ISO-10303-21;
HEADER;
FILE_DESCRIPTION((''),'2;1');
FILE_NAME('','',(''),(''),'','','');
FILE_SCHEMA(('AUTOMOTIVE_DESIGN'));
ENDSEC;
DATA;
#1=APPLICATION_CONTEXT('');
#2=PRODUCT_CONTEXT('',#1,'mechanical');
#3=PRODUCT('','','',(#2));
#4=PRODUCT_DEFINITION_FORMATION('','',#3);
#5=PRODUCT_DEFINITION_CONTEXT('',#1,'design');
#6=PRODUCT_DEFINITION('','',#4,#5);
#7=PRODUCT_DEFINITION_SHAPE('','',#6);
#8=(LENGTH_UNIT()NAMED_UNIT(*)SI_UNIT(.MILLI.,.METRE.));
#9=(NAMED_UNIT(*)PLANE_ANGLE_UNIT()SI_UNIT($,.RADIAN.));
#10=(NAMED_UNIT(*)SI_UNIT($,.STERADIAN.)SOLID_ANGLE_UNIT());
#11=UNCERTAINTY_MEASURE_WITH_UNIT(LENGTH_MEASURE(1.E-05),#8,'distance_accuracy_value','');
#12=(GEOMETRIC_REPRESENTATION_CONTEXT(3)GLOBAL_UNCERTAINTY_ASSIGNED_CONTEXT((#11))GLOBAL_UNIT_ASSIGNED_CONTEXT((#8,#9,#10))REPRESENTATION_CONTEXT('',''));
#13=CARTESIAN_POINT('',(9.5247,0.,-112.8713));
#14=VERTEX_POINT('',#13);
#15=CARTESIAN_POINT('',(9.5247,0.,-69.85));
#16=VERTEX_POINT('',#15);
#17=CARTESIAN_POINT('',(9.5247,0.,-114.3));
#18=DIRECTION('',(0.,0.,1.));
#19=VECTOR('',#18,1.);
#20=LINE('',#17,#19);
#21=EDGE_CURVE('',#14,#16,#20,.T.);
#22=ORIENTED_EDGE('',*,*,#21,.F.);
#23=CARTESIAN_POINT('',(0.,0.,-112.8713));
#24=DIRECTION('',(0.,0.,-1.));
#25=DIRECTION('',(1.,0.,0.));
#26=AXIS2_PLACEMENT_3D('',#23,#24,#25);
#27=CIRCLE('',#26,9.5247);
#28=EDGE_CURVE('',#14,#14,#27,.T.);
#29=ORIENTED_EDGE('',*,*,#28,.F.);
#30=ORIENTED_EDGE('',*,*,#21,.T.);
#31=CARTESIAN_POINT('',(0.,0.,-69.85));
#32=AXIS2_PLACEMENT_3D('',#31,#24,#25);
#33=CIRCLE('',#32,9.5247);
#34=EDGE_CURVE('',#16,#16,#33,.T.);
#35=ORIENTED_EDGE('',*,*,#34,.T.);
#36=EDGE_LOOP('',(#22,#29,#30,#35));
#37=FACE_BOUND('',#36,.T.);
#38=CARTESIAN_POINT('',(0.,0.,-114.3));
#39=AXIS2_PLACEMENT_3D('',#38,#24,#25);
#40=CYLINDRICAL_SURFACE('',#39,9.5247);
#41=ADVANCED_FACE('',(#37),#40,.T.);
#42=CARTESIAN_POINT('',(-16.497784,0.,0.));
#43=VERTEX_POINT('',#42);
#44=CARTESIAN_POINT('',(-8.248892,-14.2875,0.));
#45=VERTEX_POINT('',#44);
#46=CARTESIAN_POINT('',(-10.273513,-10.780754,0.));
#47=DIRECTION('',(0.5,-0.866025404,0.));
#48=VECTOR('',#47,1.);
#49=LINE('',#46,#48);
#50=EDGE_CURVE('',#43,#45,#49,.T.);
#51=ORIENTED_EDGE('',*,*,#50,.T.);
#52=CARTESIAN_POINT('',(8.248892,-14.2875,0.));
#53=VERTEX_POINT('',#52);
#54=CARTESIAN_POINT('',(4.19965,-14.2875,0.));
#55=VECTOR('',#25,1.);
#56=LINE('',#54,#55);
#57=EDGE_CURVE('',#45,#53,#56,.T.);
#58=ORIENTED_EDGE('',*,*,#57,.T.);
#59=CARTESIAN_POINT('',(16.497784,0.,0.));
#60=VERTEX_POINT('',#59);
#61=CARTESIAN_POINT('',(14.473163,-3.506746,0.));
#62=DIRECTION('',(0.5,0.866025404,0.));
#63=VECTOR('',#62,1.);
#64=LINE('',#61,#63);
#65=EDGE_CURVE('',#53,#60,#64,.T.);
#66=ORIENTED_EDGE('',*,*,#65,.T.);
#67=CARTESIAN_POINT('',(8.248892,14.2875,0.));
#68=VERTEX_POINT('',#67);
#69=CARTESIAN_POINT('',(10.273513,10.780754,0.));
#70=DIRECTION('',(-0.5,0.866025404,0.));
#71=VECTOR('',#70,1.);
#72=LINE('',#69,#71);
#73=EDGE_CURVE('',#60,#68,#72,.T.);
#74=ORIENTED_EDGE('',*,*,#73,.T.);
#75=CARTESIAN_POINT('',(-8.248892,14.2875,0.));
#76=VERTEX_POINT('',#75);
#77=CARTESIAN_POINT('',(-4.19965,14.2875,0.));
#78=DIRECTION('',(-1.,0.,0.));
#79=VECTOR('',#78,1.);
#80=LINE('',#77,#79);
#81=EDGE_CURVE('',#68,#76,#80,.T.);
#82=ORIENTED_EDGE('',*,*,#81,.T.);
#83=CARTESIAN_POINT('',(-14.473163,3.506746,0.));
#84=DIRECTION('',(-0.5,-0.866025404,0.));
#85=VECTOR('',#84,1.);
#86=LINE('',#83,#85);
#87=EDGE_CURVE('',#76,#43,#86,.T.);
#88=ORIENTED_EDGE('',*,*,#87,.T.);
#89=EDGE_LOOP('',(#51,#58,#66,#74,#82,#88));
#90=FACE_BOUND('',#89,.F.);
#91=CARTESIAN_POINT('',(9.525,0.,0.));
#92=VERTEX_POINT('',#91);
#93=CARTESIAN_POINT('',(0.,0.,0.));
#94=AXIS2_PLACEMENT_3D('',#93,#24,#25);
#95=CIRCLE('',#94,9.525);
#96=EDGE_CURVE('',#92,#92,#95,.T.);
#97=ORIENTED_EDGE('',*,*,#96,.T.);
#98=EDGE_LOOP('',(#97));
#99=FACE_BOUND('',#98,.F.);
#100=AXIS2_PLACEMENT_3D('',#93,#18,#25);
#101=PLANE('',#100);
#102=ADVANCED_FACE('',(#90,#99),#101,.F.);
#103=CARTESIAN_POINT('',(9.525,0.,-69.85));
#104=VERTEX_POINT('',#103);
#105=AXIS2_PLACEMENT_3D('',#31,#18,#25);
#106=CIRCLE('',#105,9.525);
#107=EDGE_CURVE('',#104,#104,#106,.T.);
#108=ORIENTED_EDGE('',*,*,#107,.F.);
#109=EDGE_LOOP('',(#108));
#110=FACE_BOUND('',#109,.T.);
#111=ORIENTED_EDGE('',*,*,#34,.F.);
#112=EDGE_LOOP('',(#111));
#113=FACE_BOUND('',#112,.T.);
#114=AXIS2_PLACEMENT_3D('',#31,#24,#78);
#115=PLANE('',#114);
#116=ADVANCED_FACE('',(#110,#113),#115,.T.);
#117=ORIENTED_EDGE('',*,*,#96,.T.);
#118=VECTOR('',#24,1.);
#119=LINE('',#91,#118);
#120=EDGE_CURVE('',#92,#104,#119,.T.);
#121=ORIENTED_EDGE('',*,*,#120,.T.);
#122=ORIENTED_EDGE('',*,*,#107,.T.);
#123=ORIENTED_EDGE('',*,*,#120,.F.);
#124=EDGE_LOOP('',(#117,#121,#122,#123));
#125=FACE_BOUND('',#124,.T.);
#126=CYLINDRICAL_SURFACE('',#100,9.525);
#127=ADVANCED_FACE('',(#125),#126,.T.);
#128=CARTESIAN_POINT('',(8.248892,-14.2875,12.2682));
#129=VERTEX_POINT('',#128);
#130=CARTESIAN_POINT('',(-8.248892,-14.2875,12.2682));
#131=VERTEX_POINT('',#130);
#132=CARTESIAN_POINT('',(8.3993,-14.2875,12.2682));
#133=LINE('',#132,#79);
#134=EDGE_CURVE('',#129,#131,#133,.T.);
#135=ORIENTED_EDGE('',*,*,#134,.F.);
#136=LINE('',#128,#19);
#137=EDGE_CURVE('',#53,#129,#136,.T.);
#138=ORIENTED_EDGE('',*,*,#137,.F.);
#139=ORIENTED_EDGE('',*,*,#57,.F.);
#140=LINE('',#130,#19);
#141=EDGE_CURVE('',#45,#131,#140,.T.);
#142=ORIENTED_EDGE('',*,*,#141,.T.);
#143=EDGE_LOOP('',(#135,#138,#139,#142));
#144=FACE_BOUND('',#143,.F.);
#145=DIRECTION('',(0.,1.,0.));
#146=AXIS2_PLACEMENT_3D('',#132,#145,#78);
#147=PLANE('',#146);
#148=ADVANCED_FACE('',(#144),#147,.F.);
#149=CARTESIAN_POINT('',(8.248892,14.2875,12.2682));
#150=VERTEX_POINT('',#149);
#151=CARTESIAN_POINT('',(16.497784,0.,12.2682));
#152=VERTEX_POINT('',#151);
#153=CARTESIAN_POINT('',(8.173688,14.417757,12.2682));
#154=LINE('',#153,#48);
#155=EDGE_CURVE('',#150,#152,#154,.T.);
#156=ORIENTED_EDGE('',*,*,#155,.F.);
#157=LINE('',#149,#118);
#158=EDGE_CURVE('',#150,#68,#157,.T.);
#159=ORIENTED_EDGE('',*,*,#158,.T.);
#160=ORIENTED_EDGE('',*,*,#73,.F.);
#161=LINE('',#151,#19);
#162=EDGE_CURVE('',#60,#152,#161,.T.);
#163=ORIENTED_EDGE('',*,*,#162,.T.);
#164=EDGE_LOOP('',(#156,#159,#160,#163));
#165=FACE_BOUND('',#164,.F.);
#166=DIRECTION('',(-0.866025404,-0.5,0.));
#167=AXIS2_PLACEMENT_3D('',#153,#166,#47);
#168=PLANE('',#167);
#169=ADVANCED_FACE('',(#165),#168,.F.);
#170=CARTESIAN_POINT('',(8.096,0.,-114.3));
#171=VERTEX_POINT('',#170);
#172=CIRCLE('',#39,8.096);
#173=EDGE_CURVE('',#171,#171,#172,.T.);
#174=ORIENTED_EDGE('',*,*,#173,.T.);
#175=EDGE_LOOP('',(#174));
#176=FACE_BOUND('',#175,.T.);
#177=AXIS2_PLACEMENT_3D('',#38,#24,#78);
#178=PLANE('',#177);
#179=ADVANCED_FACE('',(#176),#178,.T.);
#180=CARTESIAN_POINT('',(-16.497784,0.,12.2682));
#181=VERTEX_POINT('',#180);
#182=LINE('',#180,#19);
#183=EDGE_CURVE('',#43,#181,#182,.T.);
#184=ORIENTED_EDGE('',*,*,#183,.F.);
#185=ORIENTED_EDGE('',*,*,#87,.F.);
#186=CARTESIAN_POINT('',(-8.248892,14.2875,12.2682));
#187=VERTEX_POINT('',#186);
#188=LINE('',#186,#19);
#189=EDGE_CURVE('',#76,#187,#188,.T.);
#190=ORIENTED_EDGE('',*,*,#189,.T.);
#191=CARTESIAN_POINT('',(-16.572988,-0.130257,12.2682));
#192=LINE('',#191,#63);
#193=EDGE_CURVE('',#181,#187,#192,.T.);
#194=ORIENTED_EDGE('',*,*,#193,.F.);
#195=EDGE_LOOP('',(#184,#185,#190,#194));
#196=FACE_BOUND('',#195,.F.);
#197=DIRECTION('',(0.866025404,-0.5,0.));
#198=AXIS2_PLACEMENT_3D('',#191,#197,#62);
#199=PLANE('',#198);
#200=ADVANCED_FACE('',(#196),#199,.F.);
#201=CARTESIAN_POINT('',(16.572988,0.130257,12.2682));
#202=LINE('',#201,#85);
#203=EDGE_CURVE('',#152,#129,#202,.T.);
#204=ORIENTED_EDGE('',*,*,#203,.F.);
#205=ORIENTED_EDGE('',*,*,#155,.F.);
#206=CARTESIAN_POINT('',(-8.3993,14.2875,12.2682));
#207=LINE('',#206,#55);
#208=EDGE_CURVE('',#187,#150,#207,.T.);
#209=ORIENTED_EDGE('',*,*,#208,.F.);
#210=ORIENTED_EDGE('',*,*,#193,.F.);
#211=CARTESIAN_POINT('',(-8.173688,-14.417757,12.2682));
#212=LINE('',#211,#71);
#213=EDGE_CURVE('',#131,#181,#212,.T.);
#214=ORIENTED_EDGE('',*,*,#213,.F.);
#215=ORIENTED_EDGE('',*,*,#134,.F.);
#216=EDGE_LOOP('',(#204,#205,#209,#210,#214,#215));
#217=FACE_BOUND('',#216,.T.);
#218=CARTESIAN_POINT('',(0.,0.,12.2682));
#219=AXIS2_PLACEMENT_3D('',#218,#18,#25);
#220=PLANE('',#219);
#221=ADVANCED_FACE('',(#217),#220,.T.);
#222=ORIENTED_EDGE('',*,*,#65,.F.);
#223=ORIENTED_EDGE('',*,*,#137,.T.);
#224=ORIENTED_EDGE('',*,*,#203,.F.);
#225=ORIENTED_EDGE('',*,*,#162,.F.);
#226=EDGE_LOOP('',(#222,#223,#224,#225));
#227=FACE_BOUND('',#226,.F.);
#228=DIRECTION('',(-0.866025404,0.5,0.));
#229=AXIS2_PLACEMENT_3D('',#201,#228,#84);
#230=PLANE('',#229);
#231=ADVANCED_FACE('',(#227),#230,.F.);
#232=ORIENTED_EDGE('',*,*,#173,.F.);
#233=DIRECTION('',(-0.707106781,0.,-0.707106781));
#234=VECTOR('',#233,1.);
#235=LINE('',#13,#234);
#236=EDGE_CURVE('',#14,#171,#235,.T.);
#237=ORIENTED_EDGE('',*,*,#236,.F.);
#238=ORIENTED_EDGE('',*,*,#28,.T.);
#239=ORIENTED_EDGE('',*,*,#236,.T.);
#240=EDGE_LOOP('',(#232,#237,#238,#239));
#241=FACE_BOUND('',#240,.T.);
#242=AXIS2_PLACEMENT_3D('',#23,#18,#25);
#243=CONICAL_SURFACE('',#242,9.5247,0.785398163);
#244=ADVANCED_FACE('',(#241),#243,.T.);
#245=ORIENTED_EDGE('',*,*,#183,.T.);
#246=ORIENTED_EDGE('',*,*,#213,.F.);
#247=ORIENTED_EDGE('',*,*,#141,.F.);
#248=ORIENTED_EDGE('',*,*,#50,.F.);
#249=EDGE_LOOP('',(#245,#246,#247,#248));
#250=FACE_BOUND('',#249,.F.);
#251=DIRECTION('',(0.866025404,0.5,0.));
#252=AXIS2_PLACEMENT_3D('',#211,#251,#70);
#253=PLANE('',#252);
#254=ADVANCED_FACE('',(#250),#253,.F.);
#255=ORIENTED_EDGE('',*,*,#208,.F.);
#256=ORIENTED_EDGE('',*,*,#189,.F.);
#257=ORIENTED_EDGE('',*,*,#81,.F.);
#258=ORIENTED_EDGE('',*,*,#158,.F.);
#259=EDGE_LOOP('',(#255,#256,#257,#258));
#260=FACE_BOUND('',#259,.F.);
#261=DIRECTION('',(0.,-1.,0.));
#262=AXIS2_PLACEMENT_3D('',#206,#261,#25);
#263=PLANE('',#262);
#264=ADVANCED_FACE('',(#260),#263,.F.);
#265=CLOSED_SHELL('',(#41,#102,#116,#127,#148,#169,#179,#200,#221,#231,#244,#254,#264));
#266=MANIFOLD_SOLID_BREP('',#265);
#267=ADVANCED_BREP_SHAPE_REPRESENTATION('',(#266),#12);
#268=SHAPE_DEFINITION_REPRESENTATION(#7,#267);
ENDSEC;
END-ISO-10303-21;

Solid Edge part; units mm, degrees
sketch "Sketch1" plane through (0, 0, 0) normal (0, 0, 1) x (1, 0, 0)
  circle A0 centre (0, 0) radius 16.5735
  dimension "D1" = 33.147
extrude "Protrusion1" add sketch "Sketch1" along normal blind 12.2682
sketch "Sketch2" plane through (0, 0, 0) normal (0, 0, -1) x (1, 0, 0)
  circle A0 centre (0, 0) radius 9.525
extrude "Protrusion2" add sketch "Sketch2" along normal blind 114.3
sketch "Sketch3" plane through (0, 0, -114.3) normal (0, 0, -1) x (1, 0, 0)
  circle A0 centre (0, 0) radius 9.5247
extrude "Cutout1" cut sketch "Sketch3" against normal blind 44.45 flip side to cut
chamfer "Chamfer_1" distance 1.4287 angle 45 1 edges at (-9.5247, 0, -114.3)
sketch "Sketch4" plane through (0, 0, 12.2682) normal (0, 0, 1) x (1, 0, 0)
  line L0 (-8.3993, 14.2875) -> (8.3993, 14.2875)
  dimension "D1" = 28.575
extrude "Cutout2" cut sketch "Sketch4" against normal up to next material side at (0, 14.3375, 12.2682)
pattern_circular "Pattern1" count 6 over 360 about axis through (0, 0, 12.2682) along (0, 0, 1) of "Cutout2"
properties part number "117872"
